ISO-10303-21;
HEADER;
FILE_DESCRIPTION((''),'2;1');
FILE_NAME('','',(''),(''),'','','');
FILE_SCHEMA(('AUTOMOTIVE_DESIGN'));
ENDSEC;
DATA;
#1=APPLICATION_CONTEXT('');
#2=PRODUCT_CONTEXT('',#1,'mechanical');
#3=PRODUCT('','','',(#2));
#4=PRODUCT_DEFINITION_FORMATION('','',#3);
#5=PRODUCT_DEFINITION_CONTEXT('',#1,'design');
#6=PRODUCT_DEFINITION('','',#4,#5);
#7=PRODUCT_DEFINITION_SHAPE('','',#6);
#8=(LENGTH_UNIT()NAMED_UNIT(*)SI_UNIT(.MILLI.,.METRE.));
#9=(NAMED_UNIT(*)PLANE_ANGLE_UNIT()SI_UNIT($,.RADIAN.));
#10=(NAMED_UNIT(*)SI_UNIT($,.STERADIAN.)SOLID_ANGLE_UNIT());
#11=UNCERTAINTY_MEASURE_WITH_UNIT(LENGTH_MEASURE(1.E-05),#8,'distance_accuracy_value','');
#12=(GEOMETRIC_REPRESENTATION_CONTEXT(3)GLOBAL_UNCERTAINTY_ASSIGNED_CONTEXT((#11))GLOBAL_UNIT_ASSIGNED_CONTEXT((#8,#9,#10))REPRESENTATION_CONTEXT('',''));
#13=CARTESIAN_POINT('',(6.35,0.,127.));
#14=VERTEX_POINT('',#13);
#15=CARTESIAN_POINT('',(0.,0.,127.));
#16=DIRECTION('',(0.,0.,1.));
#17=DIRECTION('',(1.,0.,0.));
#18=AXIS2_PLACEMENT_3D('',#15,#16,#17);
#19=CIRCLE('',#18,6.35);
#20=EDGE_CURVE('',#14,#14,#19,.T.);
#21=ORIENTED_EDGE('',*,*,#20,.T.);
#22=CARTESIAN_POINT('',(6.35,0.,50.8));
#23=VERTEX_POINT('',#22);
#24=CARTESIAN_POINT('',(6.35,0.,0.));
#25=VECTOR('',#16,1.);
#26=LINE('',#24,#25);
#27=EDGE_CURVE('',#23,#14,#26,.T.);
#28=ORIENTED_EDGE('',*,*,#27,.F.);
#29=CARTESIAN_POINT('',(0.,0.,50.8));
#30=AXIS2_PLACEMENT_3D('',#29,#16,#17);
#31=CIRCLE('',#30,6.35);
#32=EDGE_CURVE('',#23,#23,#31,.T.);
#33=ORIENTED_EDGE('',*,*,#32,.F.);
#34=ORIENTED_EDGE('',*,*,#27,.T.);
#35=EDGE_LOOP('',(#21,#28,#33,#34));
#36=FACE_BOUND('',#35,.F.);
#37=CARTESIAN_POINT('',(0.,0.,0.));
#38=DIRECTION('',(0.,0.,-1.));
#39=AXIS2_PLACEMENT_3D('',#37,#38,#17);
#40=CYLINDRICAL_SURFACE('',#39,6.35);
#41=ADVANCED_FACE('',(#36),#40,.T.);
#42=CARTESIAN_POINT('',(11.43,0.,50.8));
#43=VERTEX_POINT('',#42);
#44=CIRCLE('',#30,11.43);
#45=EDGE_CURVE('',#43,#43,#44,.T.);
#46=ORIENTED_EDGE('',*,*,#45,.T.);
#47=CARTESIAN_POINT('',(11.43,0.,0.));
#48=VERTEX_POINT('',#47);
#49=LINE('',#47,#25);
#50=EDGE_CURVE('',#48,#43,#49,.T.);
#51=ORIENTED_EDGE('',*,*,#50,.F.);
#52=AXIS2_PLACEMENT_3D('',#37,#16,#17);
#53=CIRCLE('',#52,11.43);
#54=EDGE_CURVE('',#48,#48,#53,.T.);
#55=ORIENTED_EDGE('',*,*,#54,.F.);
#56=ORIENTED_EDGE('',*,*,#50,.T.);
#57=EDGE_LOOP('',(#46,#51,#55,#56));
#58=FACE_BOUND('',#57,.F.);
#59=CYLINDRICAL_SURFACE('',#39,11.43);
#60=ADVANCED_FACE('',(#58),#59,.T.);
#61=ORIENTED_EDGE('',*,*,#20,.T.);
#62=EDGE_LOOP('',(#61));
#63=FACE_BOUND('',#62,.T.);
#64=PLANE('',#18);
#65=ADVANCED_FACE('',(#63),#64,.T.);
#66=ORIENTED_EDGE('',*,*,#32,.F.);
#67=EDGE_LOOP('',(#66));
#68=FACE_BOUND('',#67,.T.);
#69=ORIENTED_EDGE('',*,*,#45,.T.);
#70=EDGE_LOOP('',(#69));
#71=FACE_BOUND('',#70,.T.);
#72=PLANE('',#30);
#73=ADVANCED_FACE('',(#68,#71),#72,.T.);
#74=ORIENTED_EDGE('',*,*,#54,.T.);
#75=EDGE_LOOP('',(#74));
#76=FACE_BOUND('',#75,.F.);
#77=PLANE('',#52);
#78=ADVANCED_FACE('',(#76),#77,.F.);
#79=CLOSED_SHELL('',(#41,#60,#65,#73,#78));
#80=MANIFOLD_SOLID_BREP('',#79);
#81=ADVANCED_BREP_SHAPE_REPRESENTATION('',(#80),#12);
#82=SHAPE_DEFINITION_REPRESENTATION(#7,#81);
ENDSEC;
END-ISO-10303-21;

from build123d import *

# Parameters (mm, degrees)
F2_R     = 11.43
F2_R_2   = 6.35
F3_DEPTH = 50.8
F4_DEPTH = 127


# Not quite as in the source:
# - a variable given as a bare number and used for a length is read in inches; the dataset says mm whatever the document's units were


with BuildPart() as f3:
    # F2 (on Top) → F3 (new body)
    with BuildSketch(Plane.XY):
        Circle(F2_R)
        Circle(F2_R_2, mode=Mode.SUBTRACT)
    extrude(amount=F3_DEPTH)

    # F2 (on Top) → F4 (join)
    with BuildSketch(Plane.XY):
        Circle(F2_R_2)
    extrude(amount=F4_DEPTH)


solid = f3.part
